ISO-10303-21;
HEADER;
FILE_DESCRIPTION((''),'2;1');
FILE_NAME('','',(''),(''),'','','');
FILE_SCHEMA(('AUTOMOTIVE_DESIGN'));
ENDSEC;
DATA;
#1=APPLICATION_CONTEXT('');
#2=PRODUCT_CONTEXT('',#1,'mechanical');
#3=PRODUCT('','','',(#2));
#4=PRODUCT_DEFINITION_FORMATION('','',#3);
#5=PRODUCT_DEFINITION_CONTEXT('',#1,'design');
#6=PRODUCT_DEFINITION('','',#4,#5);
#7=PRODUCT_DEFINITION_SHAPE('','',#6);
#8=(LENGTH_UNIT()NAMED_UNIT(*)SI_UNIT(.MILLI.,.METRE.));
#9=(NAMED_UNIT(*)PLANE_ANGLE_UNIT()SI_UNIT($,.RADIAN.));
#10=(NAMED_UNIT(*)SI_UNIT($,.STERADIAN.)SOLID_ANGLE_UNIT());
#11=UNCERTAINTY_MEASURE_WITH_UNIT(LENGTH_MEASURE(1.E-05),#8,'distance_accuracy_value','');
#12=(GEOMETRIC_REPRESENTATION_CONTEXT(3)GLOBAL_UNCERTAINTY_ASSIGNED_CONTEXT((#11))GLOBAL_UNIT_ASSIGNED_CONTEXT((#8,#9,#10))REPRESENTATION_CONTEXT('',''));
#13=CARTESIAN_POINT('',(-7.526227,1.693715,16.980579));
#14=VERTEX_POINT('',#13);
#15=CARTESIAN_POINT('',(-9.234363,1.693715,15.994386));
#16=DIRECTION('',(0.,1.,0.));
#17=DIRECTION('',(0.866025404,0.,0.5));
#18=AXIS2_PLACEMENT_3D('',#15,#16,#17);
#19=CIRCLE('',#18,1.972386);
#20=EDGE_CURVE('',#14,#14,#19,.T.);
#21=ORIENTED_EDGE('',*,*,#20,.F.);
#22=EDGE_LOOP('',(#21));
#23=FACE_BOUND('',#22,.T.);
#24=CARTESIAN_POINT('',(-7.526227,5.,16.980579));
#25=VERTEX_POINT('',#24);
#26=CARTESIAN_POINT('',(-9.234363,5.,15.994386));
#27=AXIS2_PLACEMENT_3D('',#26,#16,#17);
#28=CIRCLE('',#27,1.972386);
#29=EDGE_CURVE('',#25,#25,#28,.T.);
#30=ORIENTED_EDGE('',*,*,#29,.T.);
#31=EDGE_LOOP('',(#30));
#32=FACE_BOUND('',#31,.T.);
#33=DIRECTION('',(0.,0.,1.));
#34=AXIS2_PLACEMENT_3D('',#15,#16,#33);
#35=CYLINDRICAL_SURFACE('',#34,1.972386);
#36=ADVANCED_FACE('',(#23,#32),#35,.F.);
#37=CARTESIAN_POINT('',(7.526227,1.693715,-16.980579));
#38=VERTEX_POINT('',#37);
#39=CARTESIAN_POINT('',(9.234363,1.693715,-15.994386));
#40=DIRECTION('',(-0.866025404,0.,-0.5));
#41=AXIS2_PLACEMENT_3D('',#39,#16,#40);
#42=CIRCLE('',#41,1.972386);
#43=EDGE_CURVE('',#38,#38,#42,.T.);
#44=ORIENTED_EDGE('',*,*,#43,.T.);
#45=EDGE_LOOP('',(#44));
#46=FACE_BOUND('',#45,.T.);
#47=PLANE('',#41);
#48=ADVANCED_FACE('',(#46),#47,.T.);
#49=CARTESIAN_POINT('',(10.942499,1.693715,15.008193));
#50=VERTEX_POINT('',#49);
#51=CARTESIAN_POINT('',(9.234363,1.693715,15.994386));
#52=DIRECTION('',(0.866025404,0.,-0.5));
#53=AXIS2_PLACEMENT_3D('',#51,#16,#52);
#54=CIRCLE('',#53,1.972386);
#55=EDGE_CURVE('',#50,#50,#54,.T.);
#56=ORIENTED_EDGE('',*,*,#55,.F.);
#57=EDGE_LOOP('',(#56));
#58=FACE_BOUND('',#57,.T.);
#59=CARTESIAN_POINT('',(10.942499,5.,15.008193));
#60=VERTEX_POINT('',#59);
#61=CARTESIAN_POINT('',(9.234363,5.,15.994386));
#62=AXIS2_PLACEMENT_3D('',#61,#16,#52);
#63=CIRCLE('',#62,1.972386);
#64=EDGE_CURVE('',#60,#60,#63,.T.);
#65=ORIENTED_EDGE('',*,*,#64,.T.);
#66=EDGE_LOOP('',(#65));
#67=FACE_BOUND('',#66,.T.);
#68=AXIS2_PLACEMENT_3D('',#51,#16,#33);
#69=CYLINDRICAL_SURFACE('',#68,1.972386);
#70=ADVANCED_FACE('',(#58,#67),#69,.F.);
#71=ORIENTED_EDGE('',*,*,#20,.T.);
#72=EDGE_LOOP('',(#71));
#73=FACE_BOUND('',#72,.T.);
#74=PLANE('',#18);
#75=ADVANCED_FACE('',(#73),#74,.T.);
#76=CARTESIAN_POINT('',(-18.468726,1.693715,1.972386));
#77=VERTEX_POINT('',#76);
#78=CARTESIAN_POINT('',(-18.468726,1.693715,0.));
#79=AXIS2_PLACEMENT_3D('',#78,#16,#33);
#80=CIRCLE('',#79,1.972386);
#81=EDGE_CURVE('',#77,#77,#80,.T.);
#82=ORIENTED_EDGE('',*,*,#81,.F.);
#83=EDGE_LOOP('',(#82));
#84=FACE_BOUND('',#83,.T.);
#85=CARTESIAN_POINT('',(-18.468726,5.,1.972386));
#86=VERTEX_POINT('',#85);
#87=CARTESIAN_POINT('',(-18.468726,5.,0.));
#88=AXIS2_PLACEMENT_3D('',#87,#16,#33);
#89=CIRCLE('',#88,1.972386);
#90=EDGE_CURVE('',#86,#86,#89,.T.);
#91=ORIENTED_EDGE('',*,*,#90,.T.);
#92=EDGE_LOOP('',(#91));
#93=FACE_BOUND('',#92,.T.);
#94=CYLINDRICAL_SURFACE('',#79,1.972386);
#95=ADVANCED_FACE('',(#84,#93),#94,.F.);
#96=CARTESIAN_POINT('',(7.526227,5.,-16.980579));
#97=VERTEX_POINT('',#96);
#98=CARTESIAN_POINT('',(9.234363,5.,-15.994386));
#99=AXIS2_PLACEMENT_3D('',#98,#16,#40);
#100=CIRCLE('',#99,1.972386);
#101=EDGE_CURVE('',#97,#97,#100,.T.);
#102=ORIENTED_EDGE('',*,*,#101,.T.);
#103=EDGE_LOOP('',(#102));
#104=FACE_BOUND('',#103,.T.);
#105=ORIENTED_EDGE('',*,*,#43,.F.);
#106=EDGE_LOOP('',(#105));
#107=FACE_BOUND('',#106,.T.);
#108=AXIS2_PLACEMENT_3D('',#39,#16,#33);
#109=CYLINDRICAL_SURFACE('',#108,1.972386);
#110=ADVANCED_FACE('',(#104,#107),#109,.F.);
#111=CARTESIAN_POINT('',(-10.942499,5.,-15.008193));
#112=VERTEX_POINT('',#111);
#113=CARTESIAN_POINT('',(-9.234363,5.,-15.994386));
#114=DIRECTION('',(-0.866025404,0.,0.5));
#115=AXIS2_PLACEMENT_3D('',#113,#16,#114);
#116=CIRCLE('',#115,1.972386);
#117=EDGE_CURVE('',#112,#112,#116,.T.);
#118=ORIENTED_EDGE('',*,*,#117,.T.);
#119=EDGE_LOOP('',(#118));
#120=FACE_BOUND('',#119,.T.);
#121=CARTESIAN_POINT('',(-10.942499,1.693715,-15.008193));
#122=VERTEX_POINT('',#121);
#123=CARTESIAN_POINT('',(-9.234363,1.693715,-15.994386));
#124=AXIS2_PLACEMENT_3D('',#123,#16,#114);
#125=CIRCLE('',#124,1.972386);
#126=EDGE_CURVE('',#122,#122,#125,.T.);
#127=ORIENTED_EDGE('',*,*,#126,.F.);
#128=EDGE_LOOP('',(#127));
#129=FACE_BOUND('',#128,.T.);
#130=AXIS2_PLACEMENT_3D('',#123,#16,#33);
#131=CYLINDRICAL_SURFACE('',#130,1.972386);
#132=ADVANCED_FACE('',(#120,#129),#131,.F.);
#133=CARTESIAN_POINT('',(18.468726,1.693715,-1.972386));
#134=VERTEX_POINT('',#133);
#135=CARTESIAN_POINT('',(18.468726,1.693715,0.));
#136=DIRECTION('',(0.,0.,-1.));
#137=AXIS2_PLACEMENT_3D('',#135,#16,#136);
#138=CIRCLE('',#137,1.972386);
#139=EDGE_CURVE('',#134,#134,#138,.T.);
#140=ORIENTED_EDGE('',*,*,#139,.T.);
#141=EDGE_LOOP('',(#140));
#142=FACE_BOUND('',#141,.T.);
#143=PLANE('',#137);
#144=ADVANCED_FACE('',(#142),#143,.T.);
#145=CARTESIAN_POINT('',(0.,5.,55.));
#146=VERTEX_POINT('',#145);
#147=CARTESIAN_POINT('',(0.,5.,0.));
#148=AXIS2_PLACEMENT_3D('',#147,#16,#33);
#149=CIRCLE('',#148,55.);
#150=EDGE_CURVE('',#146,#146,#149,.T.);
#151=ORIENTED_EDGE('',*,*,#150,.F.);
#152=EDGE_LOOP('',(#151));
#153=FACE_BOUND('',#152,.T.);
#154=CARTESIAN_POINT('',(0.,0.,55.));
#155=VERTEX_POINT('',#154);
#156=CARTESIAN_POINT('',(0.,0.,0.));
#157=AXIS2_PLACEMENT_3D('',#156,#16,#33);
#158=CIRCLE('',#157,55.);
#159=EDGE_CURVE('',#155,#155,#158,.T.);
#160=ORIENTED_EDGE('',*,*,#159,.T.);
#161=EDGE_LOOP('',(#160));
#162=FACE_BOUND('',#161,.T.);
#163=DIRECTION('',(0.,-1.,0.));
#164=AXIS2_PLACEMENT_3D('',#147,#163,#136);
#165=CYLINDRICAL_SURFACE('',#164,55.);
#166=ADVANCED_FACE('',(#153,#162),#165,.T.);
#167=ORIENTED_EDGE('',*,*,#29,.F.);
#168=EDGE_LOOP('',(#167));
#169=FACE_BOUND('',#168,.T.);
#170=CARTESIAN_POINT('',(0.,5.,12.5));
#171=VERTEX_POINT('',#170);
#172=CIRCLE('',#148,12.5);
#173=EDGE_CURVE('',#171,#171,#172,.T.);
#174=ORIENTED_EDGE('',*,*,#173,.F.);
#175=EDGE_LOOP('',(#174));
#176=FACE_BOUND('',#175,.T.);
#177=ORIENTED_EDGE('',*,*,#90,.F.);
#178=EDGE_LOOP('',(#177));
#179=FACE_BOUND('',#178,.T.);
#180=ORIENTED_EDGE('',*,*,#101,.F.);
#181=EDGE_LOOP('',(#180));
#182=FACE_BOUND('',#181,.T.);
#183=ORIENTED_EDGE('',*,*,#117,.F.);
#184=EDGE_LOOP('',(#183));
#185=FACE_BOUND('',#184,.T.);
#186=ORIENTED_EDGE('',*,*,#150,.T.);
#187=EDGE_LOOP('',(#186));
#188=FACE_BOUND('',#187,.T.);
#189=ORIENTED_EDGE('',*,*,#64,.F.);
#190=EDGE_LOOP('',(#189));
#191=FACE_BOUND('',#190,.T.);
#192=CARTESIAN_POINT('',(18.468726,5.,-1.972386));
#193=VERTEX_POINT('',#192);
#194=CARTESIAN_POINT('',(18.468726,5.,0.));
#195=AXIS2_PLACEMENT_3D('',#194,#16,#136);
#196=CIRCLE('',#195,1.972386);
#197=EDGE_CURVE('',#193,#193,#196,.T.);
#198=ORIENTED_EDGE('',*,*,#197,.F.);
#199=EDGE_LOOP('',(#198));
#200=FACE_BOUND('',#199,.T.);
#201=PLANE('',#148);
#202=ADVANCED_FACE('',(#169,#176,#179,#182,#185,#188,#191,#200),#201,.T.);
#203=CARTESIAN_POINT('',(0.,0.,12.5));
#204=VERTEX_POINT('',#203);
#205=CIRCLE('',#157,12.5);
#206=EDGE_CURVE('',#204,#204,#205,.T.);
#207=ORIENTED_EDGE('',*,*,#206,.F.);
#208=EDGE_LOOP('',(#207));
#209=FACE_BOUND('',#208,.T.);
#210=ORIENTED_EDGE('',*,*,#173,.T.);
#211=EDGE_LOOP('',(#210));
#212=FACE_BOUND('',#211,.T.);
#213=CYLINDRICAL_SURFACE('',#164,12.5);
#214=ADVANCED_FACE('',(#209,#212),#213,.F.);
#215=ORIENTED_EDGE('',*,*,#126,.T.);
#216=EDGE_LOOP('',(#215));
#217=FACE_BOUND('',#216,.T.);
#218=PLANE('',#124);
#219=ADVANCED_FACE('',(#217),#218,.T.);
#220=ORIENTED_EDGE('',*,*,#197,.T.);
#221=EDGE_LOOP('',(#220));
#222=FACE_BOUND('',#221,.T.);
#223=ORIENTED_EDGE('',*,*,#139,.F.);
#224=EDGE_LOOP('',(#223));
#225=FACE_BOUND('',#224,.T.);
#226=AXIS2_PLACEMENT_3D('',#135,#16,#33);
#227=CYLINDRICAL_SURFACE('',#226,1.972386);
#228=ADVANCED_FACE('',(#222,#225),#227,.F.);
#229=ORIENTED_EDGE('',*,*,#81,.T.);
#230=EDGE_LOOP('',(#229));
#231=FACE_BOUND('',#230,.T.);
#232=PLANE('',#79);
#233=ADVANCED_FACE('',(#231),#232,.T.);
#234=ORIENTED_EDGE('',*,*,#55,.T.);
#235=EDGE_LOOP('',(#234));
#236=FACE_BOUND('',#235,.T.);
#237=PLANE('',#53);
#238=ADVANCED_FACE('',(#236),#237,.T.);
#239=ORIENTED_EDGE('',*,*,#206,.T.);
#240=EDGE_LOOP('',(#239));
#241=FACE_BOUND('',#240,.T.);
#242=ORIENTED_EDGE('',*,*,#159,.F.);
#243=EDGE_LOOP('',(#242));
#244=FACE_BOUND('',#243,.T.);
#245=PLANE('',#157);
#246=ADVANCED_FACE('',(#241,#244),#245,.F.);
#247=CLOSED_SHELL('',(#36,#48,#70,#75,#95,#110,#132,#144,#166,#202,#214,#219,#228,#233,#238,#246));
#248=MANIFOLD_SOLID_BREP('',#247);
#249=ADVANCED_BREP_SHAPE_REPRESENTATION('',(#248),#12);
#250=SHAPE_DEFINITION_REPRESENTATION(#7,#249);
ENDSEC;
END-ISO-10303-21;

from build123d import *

# Parameters (mm, degrees)
SKETCH1_R           = 55
BOSS_EXTRUDE1_DEPTH = 5
SKETCH2_R           = 12.5
CUT_EXTRUDE1_DEPTH  = 78.942286341
SKETCH3_R           = 1.972385868
CUT_EXTRUDE2_DEPTH  = 3.306285454
CIRPATTERN1_COUNT   = 6


with BuildPart() as part:
    # Sketch1 → Boss-Extrude1 (new body)
    with BuildSketch(Plane(origin=(0, 0, 0), x_dir=(1, 0, 0), z_dir=(0, 1, 0))):
        Circle(SKETCH1_R)
    extrude(amount=BOSS_EXTRUDE1_DEPTH)

    # Sketch2 → Cut-Extrude1 (cut, through all)
    with BuildSketch(Plane(origin=(0, 0, 0), x_dir=(1, 0, 0), z_dir=(0, 1, 0))):
        Circle(SKETCH2_R)
    extrude(amount=CUT_EXTRUDE1_DEPTH, mode=Mode.SUBTRACT)

    # Sketch3 → Cut-Extrude2 (cut)
    with BuildSketch(Plane(origin=(0, 5, 0), x_dir=(1, 0, 0), z_dir=(0, 1, 0))):
        with Locations((-18.468726212, 0)):
            Circle(SKETCH3_R)
    cut_extrude2 = extrude(amount=-CUT_EXTRUDE2_DEPTH, mode=Mode.SUBTRACT)

    # CirPattern1: Cut-Extrude2 ×6 about axis
    cirpattern1_axis = Axis((0, 0, 0), (0, 1, 0))
    for i in range(1, CIRPATTERN1_COUNT):
        add(cut_extrude2.rotate(cirpattern1_axis, i * 360 / CIRPATTERN1_COUNT), mode=Mode.SUBTRACT)


solid = part.part
